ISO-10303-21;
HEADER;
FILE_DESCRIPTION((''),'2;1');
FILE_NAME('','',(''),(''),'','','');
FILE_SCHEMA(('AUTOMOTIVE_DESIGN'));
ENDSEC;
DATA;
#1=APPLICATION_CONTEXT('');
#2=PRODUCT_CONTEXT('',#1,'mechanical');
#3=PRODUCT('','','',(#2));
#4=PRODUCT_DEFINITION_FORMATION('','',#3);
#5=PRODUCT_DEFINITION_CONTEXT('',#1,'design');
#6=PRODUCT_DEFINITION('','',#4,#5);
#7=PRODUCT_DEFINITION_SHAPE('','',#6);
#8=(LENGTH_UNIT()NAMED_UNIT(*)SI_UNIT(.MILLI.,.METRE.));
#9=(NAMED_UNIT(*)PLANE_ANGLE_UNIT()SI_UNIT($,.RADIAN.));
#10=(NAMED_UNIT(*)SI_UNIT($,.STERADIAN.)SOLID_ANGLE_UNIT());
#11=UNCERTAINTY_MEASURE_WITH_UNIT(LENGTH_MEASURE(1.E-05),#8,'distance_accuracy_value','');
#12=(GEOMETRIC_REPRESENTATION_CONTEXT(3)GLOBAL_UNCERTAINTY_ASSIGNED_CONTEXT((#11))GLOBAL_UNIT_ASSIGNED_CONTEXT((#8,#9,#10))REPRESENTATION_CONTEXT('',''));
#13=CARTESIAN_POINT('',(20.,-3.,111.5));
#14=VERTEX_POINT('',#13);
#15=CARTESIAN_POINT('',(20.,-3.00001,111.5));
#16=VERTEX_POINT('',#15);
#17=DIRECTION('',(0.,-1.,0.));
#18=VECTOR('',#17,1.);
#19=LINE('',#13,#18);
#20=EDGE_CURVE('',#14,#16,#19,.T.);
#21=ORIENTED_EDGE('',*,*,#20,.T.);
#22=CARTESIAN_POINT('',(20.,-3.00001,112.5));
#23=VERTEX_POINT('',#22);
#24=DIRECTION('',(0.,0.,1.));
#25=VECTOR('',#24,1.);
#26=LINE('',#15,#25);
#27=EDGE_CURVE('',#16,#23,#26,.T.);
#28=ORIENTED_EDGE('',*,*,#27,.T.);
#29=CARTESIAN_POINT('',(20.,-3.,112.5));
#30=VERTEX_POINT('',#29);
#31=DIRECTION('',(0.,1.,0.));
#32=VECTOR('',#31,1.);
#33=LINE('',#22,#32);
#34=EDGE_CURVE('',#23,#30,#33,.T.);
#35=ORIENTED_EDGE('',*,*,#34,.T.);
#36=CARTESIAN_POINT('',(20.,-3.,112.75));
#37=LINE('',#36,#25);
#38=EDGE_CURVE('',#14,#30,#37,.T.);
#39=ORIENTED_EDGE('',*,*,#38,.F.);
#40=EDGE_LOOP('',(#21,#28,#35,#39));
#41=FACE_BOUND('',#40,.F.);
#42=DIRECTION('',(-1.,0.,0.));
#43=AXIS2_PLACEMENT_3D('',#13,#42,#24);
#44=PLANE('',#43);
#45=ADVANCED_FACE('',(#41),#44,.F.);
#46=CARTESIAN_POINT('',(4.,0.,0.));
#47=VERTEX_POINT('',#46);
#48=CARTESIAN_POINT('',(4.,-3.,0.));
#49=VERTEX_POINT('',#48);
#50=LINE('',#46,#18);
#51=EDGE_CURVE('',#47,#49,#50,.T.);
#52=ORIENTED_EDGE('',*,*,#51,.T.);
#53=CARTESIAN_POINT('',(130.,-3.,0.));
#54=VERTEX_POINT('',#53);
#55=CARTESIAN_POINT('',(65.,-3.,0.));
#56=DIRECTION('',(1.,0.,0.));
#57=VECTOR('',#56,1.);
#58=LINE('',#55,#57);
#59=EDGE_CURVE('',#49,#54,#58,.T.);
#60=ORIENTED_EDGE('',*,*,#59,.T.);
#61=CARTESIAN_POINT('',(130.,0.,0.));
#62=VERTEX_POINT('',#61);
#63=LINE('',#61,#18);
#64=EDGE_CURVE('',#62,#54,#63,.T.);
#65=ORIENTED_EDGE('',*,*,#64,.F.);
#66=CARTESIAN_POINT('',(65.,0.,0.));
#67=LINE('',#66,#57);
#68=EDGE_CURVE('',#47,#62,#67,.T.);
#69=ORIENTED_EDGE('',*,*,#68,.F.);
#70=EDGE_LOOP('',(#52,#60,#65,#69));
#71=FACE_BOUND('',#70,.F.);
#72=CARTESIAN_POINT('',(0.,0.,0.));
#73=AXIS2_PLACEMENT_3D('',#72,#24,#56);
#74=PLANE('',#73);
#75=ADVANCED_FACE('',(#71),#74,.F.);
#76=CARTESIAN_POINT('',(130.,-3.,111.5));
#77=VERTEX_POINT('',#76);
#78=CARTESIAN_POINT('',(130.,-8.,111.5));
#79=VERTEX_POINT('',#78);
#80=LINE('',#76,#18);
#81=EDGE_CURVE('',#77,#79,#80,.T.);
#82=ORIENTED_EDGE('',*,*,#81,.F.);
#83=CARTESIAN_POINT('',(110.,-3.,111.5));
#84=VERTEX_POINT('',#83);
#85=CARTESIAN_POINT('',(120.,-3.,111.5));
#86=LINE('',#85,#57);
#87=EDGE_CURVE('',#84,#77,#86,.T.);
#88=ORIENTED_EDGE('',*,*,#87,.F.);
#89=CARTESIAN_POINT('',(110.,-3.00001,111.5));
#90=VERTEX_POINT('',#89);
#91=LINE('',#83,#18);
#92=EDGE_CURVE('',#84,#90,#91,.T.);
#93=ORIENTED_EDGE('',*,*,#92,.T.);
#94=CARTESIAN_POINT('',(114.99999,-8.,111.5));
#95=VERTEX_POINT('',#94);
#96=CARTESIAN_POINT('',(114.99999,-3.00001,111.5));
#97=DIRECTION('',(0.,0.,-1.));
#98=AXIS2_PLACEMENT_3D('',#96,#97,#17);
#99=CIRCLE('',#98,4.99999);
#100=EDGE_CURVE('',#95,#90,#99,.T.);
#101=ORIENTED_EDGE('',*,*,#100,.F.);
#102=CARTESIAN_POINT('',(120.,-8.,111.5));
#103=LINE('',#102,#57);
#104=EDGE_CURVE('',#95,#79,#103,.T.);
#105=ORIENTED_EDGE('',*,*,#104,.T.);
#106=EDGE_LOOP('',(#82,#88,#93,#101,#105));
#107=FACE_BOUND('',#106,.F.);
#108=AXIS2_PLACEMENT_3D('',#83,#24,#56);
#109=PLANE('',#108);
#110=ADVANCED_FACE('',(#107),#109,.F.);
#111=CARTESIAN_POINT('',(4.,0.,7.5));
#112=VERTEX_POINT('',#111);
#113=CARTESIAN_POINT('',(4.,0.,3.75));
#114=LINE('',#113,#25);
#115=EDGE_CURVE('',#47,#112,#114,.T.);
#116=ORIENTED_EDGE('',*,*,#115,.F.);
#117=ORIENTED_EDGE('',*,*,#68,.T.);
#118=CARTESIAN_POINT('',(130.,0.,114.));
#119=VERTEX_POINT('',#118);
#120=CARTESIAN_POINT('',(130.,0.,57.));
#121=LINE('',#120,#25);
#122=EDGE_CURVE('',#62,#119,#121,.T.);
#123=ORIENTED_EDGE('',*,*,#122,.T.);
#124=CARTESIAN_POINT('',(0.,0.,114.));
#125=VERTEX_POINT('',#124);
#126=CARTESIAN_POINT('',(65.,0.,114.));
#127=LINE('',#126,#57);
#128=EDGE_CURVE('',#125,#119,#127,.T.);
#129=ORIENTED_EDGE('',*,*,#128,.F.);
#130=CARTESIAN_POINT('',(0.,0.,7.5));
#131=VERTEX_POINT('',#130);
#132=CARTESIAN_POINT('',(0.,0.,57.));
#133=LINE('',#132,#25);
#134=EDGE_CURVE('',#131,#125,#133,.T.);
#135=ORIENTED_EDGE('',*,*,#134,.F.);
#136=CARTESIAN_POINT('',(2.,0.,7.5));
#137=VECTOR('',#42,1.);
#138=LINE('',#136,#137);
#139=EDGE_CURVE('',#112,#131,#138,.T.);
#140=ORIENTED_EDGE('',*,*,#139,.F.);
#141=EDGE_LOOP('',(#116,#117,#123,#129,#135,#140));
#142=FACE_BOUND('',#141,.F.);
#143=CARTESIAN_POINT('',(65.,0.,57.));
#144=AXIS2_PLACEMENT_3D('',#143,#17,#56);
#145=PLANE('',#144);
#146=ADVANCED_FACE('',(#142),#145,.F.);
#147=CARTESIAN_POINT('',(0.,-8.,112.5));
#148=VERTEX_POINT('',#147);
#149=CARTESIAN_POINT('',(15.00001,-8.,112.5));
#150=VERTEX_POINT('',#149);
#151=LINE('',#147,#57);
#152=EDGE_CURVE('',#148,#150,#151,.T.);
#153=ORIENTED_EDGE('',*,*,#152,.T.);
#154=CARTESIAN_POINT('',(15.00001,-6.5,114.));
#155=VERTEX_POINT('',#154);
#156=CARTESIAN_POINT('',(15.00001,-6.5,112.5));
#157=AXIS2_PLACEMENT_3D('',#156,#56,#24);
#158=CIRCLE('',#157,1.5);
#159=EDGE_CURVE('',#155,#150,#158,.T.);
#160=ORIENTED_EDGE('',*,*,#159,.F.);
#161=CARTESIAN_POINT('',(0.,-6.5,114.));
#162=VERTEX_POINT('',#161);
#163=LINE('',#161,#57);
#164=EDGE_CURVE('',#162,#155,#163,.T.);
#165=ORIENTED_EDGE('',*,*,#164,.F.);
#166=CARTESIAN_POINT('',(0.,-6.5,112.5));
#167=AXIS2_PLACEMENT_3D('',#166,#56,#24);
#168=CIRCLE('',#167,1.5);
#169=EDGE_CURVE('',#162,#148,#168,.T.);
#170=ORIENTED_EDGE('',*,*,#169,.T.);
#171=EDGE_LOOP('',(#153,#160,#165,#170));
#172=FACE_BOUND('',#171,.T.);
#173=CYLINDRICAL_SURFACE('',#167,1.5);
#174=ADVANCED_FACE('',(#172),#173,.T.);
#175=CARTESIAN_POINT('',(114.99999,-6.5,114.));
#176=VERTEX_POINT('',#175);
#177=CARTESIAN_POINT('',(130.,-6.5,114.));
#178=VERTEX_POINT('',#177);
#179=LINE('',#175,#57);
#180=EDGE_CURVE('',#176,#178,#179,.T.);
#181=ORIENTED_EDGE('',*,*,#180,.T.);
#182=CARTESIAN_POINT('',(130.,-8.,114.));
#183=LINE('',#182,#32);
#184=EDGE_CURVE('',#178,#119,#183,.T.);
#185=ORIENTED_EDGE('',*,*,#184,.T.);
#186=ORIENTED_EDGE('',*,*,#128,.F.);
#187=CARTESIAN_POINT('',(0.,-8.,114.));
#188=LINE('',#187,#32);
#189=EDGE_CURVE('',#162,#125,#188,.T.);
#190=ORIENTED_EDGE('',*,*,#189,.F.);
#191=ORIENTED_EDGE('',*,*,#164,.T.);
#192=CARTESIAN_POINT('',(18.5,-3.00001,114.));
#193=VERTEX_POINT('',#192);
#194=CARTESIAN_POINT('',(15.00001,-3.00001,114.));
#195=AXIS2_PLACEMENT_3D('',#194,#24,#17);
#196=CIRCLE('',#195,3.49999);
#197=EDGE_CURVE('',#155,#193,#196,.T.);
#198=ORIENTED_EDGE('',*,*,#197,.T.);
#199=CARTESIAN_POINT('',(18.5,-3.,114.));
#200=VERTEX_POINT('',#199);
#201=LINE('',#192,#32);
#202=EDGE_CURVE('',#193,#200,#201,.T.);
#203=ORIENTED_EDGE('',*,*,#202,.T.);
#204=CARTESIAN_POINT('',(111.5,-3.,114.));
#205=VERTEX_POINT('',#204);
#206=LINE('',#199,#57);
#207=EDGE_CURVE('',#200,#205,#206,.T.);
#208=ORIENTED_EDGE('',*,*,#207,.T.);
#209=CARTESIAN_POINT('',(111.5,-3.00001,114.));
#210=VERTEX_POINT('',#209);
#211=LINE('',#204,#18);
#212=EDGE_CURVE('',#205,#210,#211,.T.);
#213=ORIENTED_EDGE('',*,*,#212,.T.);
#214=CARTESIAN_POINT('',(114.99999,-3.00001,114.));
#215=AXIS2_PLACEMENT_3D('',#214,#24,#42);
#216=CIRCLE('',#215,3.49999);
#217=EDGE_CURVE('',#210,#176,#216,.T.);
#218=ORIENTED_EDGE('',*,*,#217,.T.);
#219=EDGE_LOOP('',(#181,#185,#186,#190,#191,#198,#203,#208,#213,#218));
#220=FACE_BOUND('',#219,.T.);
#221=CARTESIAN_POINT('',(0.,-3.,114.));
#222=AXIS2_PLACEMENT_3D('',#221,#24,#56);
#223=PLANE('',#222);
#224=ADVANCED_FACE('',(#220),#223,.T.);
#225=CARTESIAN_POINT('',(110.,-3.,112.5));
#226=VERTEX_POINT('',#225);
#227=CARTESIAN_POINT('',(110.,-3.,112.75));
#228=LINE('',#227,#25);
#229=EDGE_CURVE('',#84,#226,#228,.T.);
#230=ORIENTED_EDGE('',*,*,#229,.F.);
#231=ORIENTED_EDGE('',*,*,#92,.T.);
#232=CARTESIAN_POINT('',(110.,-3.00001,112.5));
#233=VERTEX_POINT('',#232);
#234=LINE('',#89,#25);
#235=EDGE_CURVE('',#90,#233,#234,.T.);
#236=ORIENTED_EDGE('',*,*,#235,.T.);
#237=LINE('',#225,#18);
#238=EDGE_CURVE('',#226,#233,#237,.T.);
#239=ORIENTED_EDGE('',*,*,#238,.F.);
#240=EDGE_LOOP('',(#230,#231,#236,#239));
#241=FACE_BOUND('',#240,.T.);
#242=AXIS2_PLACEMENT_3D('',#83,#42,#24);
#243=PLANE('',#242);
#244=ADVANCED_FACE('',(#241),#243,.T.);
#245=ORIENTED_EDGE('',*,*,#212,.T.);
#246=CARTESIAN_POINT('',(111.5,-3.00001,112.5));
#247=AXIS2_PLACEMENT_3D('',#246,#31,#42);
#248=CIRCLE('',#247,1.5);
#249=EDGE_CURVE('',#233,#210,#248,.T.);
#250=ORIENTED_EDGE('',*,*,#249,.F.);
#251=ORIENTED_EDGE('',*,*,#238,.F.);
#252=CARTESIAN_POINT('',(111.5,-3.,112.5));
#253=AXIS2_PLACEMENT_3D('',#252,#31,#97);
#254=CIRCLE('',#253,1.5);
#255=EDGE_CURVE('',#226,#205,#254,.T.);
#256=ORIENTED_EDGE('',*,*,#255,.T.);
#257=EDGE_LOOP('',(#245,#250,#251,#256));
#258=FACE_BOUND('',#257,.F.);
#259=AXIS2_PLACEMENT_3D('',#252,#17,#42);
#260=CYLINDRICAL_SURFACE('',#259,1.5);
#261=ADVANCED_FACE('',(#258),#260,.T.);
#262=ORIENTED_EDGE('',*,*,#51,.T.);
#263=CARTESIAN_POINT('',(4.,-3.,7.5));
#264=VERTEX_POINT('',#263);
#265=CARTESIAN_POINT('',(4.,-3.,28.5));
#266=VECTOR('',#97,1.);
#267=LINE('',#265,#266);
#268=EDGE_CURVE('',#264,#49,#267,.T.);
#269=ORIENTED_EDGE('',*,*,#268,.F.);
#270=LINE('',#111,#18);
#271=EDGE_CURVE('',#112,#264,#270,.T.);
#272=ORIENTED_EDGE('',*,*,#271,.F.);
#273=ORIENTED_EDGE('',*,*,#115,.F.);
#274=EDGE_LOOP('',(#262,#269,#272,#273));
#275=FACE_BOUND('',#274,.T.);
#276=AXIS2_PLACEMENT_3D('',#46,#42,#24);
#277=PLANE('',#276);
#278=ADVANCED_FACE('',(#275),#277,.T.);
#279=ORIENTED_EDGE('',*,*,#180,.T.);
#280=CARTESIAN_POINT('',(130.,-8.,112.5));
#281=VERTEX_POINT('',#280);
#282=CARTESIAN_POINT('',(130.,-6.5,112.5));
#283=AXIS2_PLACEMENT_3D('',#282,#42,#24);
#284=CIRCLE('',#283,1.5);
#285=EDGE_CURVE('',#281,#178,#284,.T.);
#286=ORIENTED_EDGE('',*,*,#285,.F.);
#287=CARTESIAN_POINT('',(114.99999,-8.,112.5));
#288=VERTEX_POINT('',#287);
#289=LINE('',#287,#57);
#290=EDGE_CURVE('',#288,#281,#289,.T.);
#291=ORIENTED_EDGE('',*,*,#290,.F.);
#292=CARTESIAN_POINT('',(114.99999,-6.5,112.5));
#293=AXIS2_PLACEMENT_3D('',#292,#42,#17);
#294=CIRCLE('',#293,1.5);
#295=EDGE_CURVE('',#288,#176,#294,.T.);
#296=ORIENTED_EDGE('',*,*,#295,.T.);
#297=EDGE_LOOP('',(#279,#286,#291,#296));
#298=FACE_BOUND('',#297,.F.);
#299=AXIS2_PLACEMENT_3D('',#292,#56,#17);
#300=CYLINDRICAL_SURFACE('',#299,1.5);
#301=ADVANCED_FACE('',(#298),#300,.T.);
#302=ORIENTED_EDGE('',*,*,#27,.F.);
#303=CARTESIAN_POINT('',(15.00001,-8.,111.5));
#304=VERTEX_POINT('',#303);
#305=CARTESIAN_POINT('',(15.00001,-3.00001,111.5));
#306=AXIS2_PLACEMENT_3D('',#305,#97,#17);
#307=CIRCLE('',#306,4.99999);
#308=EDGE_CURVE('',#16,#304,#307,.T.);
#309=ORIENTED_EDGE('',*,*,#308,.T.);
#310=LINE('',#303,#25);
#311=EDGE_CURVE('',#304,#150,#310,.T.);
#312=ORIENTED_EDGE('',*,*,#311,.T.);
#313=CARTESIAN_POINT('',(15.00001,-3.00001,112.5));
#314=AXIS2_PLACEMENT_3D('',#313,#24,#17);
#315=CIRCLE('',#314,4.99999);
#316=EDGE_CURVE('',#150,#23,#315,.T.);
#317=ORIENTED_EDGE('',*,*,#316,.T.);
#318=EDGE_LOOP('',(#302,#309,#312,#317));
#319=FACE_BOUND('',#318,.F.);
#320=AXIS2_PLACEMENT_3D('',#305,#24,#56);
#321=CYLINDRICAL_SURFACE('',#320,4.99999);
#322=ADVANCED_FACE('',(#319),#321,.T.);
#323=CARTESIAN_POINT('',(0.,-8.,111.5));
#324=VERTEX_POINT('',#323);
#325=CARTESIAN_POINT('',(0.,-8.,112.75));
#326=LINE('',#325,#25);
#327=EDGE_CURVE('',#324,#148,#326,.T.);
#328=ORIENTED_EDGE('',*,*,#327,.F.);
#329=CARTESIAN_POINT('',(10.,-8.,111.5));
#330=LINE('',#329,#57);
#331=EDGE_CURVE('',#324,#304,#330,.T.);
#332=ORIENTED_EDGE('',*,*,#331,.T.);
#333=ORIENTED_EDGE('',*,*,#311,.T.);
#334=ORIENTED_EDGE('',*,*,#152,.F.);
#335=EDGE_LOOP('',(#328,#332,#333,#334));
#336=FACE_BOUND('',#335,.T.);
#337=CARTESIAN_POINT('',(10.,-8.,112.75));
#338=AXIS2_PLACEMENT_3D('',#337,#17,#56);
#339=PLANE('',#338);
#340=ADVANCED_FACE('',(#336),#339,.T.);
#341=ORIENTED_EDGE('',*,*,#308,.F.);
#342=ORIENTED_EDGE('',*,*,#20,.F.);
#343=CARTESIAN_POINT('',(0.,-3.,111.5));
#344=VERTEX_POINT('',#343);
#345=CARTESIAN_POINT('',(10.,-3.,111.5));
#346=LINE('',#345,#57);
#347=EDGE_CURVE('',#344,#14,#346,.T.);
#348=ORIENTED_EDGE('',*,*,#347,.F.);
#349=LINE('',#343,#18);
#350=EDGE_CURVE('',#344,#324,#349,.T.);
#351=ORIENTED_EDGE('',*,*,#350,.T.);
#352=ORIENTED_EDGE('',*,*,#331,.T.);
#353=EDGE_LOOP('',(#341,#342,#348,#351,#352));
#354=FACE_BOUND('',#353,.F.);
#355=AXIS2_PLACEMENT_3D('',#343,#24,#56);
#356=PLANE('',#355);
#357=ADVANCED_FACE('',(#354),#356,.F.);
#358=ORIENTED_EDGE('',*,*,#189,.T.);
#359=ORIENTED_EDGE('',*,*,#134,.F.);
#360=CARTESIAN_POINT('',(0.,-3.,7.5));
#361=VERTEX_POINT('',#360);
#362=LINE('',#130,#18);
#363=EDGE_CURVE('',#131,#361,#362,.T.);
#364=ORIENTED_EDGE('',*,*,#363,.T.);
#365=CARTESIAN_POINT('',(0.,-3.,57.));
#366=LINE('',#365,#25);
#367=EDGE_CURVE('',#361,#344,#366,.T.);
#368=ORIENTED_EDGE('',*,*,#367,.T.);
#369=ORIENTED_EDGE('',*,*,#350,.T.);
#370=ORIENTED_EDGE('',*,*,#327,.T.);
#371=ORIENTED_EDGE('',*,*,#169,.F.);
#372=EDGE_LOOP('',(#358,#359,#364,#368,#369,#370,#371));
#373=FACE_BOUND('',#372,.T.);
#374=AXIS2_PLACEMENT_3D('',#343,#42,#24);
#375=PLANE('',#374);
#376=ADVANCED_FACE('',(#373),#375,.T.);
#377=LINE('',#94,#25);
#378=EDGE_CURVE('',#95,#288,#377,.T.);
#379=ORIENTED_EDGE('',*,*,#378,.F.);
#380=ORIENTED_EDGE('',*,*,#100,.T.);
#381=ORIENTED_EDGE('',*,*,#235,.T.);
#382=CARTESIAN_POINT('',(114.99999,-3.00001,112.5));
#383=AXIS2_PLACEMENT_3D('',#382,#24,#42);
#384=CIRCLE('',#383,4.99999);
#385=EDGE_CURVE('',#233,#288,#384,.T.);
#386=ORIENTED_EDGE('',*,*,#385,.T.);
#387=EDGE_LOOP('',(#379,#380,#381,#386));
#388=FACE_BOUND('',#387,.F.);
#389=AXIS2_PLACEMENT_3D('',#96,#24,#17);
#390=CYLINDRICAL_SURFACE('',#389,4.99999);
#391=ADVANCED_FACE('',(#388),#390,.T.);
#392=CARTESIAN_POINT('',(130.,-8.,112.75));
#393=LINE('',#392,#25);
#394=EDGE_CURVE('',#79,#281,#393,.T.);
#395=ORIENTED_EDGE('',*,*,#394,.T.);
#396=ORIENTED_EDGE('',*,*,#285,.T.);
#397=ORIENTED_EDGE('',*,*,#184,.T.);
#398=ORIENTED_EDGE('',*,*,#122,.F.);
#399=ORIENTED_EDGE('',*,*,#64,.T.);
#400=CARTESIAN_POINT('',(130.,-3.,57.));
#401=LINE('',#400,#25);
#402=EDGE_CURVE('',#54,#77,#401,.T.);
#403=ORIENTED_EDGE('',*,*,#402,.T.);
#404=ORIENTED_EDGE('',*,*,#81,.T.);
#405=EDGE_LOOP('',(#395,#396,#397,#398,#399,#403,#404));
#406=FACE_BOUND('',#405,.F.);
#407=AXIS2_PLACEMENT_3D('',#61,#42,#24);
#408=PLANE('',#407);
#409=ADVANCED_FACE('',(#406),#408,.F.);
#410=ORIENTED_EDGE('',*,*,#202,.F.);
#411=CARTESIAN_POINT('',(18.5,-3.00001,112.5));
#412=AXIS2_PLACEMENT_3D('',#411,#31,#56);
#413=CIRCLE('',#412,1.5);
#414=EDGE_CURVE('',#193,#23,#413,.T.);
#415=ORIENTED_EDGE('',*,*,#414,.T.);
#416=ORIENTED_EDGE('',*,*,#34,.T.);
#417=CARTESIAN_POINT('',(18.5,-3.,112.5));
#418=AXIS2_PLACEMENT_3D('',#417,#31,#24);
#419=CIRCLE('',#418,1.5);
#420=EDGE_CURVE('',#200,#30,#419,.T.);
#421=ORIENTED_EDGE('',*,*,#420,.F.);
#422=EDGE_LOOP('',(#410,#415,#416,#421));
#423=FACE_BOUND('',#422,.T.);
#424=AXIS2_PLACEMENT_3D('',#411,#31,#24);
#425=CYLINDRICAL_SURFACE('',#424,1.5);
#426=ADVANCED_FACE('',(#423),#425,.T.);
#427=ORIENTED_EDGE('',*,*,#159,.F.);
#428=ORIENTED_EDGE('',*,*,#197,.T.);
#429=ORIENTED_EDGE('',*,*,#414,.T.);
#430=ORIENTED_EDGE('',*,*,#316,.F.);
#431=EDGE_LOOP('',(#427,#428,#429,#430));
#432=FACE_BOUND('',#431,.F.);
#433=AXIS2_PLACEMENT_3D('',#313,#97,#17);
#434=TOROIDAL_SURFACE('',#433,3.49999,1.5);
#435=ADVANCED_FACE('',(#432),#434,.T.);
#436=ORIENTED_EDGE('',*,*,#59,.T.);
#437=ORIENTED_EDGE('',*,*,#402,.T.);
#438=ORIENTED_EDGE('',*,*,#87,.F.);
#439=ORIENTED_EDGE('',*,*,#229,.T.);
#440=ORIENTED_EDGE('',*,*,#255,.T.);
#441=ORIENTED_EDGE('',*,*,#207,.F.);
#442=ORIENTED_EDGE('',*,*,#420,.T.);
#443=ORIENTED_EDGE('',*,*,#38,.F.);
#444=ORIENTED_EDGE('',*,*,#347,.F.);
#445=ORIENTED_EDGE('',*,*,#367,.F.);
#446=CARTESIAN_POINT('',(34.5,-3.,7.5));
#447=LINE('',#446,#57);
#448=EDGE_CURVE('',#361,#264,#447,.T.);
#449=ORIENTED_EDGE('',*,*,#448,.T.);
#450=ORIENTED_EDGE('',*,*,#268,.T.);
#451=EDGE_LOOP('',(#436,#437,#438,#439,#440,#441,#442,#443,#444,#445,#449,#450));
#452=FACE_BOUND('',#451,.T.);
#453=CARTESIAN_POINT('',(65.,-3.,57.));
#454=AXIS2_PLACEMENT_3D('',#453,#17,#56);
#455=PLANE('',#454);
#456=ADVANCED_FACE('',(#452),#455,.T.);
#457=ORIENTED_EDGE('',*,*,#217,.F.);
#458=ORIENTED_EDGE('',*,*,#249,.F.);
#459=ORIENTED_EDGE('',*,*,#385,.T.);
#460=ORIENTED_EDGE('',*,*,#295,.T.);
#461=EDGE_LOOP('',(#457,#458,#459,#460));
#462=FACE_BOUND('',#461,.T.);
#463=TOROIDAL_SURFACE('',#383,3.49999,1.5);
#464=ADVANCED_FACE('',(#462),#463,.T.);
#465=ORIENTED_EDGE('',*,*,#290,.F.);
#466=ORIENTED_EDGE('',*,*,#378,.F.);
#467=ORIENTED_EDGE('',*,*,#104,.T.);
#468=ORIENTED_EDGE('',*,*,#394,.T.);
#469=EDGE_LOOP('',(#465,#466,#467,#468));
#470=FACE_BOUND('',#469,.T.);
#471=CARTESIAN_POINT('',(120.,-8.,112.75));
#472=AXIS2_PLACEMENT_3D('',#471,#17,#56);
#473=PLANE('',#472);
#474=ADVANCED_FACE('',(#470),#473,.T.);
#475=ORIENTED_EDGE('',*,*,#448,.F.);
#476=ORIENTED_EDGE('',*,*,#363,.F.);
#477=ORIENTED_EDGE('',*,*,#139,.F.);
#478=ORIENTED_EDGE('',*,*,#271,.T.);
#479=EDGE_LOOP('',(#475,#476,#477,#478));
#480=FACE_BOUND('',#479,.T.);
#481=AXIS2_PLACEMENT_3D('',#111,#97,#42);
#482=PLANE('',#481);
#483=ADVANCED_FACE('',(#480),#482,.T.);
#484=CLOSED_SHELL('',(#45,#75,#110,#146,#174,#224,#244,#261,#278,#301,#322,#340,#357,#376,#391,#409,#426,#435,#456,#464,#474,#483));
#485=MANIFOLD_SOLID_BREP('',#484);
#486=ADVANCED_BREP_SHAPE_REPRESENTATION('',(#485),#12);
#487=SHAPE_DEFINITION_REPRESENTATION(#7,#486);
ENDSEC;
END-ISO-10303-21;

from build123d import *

# Parameters (mm, degrees)
F0_W     = 130
F0_H     = 114
F1_DEPTH = 3
F2_W     = 20
F2_H     = 2.5
F3_DEPTH = 5
F4_R     = 4.99999
F5_R     = 1.5
F6_W     = 4
F6_H     = 7.5
F7_DEPTH = 25


# Not quite as in the source:
# - a fillet or chamfer is up to 0.001 mm smaller than in the source, because OpenCascade refuses the exact size


with BuildPart() as f1:
    # F0 (on Front) → F1 (new body)
    with BuildSketch(Plane.XZ):
        with Locations((65, 57)):
            Rectangle(F0_W, F0_H)
    extrude(amount=F1_DEPTH)

    # F2 (on face) → F3 (join)
    with BuildSketch(Plane.XZ.offset(3)):
        with Locations((10, 112.75)):
            Rectangle(F2_W, F2_H)
        with Locations((120, 112.75)):
            Rectangle(F2_W, F2_H)
    extrude(amount=F3_DEPTH)

    # F4 (radius 5 in the source; OpenCascade refuses exactly that, so slightly less here)
    f4_edges = [f1.edges().sort_by_distance(p)[0] for p in [
        (20, -8, 112.75),
        (110, -8, 112.75),
    ]]
    fillet(f4_edges, radius=F4_R)

    # F5
    f5_edges = [f1.edges().sort_by_distance(p)[0] for p in [
        (7.500005, -8, 114),
        (122.499995, -8, 114),
    ]]
    fillet(f5_edges, radius=F5_R)

    # F6 (on face) → F7 (cut)
    with BuildSketch(Plane(origin=(0, 0, 0), x_dir=(-1, 0, 0), z_dir=(0, 1, 0))):
        with Locations((-2, 3.75)):
            Rectangle(F6_W, F6_H)
    extrude(amount=-F7_DEPTH, mode=Mode.SUBTRACT)


solid = f1.part
